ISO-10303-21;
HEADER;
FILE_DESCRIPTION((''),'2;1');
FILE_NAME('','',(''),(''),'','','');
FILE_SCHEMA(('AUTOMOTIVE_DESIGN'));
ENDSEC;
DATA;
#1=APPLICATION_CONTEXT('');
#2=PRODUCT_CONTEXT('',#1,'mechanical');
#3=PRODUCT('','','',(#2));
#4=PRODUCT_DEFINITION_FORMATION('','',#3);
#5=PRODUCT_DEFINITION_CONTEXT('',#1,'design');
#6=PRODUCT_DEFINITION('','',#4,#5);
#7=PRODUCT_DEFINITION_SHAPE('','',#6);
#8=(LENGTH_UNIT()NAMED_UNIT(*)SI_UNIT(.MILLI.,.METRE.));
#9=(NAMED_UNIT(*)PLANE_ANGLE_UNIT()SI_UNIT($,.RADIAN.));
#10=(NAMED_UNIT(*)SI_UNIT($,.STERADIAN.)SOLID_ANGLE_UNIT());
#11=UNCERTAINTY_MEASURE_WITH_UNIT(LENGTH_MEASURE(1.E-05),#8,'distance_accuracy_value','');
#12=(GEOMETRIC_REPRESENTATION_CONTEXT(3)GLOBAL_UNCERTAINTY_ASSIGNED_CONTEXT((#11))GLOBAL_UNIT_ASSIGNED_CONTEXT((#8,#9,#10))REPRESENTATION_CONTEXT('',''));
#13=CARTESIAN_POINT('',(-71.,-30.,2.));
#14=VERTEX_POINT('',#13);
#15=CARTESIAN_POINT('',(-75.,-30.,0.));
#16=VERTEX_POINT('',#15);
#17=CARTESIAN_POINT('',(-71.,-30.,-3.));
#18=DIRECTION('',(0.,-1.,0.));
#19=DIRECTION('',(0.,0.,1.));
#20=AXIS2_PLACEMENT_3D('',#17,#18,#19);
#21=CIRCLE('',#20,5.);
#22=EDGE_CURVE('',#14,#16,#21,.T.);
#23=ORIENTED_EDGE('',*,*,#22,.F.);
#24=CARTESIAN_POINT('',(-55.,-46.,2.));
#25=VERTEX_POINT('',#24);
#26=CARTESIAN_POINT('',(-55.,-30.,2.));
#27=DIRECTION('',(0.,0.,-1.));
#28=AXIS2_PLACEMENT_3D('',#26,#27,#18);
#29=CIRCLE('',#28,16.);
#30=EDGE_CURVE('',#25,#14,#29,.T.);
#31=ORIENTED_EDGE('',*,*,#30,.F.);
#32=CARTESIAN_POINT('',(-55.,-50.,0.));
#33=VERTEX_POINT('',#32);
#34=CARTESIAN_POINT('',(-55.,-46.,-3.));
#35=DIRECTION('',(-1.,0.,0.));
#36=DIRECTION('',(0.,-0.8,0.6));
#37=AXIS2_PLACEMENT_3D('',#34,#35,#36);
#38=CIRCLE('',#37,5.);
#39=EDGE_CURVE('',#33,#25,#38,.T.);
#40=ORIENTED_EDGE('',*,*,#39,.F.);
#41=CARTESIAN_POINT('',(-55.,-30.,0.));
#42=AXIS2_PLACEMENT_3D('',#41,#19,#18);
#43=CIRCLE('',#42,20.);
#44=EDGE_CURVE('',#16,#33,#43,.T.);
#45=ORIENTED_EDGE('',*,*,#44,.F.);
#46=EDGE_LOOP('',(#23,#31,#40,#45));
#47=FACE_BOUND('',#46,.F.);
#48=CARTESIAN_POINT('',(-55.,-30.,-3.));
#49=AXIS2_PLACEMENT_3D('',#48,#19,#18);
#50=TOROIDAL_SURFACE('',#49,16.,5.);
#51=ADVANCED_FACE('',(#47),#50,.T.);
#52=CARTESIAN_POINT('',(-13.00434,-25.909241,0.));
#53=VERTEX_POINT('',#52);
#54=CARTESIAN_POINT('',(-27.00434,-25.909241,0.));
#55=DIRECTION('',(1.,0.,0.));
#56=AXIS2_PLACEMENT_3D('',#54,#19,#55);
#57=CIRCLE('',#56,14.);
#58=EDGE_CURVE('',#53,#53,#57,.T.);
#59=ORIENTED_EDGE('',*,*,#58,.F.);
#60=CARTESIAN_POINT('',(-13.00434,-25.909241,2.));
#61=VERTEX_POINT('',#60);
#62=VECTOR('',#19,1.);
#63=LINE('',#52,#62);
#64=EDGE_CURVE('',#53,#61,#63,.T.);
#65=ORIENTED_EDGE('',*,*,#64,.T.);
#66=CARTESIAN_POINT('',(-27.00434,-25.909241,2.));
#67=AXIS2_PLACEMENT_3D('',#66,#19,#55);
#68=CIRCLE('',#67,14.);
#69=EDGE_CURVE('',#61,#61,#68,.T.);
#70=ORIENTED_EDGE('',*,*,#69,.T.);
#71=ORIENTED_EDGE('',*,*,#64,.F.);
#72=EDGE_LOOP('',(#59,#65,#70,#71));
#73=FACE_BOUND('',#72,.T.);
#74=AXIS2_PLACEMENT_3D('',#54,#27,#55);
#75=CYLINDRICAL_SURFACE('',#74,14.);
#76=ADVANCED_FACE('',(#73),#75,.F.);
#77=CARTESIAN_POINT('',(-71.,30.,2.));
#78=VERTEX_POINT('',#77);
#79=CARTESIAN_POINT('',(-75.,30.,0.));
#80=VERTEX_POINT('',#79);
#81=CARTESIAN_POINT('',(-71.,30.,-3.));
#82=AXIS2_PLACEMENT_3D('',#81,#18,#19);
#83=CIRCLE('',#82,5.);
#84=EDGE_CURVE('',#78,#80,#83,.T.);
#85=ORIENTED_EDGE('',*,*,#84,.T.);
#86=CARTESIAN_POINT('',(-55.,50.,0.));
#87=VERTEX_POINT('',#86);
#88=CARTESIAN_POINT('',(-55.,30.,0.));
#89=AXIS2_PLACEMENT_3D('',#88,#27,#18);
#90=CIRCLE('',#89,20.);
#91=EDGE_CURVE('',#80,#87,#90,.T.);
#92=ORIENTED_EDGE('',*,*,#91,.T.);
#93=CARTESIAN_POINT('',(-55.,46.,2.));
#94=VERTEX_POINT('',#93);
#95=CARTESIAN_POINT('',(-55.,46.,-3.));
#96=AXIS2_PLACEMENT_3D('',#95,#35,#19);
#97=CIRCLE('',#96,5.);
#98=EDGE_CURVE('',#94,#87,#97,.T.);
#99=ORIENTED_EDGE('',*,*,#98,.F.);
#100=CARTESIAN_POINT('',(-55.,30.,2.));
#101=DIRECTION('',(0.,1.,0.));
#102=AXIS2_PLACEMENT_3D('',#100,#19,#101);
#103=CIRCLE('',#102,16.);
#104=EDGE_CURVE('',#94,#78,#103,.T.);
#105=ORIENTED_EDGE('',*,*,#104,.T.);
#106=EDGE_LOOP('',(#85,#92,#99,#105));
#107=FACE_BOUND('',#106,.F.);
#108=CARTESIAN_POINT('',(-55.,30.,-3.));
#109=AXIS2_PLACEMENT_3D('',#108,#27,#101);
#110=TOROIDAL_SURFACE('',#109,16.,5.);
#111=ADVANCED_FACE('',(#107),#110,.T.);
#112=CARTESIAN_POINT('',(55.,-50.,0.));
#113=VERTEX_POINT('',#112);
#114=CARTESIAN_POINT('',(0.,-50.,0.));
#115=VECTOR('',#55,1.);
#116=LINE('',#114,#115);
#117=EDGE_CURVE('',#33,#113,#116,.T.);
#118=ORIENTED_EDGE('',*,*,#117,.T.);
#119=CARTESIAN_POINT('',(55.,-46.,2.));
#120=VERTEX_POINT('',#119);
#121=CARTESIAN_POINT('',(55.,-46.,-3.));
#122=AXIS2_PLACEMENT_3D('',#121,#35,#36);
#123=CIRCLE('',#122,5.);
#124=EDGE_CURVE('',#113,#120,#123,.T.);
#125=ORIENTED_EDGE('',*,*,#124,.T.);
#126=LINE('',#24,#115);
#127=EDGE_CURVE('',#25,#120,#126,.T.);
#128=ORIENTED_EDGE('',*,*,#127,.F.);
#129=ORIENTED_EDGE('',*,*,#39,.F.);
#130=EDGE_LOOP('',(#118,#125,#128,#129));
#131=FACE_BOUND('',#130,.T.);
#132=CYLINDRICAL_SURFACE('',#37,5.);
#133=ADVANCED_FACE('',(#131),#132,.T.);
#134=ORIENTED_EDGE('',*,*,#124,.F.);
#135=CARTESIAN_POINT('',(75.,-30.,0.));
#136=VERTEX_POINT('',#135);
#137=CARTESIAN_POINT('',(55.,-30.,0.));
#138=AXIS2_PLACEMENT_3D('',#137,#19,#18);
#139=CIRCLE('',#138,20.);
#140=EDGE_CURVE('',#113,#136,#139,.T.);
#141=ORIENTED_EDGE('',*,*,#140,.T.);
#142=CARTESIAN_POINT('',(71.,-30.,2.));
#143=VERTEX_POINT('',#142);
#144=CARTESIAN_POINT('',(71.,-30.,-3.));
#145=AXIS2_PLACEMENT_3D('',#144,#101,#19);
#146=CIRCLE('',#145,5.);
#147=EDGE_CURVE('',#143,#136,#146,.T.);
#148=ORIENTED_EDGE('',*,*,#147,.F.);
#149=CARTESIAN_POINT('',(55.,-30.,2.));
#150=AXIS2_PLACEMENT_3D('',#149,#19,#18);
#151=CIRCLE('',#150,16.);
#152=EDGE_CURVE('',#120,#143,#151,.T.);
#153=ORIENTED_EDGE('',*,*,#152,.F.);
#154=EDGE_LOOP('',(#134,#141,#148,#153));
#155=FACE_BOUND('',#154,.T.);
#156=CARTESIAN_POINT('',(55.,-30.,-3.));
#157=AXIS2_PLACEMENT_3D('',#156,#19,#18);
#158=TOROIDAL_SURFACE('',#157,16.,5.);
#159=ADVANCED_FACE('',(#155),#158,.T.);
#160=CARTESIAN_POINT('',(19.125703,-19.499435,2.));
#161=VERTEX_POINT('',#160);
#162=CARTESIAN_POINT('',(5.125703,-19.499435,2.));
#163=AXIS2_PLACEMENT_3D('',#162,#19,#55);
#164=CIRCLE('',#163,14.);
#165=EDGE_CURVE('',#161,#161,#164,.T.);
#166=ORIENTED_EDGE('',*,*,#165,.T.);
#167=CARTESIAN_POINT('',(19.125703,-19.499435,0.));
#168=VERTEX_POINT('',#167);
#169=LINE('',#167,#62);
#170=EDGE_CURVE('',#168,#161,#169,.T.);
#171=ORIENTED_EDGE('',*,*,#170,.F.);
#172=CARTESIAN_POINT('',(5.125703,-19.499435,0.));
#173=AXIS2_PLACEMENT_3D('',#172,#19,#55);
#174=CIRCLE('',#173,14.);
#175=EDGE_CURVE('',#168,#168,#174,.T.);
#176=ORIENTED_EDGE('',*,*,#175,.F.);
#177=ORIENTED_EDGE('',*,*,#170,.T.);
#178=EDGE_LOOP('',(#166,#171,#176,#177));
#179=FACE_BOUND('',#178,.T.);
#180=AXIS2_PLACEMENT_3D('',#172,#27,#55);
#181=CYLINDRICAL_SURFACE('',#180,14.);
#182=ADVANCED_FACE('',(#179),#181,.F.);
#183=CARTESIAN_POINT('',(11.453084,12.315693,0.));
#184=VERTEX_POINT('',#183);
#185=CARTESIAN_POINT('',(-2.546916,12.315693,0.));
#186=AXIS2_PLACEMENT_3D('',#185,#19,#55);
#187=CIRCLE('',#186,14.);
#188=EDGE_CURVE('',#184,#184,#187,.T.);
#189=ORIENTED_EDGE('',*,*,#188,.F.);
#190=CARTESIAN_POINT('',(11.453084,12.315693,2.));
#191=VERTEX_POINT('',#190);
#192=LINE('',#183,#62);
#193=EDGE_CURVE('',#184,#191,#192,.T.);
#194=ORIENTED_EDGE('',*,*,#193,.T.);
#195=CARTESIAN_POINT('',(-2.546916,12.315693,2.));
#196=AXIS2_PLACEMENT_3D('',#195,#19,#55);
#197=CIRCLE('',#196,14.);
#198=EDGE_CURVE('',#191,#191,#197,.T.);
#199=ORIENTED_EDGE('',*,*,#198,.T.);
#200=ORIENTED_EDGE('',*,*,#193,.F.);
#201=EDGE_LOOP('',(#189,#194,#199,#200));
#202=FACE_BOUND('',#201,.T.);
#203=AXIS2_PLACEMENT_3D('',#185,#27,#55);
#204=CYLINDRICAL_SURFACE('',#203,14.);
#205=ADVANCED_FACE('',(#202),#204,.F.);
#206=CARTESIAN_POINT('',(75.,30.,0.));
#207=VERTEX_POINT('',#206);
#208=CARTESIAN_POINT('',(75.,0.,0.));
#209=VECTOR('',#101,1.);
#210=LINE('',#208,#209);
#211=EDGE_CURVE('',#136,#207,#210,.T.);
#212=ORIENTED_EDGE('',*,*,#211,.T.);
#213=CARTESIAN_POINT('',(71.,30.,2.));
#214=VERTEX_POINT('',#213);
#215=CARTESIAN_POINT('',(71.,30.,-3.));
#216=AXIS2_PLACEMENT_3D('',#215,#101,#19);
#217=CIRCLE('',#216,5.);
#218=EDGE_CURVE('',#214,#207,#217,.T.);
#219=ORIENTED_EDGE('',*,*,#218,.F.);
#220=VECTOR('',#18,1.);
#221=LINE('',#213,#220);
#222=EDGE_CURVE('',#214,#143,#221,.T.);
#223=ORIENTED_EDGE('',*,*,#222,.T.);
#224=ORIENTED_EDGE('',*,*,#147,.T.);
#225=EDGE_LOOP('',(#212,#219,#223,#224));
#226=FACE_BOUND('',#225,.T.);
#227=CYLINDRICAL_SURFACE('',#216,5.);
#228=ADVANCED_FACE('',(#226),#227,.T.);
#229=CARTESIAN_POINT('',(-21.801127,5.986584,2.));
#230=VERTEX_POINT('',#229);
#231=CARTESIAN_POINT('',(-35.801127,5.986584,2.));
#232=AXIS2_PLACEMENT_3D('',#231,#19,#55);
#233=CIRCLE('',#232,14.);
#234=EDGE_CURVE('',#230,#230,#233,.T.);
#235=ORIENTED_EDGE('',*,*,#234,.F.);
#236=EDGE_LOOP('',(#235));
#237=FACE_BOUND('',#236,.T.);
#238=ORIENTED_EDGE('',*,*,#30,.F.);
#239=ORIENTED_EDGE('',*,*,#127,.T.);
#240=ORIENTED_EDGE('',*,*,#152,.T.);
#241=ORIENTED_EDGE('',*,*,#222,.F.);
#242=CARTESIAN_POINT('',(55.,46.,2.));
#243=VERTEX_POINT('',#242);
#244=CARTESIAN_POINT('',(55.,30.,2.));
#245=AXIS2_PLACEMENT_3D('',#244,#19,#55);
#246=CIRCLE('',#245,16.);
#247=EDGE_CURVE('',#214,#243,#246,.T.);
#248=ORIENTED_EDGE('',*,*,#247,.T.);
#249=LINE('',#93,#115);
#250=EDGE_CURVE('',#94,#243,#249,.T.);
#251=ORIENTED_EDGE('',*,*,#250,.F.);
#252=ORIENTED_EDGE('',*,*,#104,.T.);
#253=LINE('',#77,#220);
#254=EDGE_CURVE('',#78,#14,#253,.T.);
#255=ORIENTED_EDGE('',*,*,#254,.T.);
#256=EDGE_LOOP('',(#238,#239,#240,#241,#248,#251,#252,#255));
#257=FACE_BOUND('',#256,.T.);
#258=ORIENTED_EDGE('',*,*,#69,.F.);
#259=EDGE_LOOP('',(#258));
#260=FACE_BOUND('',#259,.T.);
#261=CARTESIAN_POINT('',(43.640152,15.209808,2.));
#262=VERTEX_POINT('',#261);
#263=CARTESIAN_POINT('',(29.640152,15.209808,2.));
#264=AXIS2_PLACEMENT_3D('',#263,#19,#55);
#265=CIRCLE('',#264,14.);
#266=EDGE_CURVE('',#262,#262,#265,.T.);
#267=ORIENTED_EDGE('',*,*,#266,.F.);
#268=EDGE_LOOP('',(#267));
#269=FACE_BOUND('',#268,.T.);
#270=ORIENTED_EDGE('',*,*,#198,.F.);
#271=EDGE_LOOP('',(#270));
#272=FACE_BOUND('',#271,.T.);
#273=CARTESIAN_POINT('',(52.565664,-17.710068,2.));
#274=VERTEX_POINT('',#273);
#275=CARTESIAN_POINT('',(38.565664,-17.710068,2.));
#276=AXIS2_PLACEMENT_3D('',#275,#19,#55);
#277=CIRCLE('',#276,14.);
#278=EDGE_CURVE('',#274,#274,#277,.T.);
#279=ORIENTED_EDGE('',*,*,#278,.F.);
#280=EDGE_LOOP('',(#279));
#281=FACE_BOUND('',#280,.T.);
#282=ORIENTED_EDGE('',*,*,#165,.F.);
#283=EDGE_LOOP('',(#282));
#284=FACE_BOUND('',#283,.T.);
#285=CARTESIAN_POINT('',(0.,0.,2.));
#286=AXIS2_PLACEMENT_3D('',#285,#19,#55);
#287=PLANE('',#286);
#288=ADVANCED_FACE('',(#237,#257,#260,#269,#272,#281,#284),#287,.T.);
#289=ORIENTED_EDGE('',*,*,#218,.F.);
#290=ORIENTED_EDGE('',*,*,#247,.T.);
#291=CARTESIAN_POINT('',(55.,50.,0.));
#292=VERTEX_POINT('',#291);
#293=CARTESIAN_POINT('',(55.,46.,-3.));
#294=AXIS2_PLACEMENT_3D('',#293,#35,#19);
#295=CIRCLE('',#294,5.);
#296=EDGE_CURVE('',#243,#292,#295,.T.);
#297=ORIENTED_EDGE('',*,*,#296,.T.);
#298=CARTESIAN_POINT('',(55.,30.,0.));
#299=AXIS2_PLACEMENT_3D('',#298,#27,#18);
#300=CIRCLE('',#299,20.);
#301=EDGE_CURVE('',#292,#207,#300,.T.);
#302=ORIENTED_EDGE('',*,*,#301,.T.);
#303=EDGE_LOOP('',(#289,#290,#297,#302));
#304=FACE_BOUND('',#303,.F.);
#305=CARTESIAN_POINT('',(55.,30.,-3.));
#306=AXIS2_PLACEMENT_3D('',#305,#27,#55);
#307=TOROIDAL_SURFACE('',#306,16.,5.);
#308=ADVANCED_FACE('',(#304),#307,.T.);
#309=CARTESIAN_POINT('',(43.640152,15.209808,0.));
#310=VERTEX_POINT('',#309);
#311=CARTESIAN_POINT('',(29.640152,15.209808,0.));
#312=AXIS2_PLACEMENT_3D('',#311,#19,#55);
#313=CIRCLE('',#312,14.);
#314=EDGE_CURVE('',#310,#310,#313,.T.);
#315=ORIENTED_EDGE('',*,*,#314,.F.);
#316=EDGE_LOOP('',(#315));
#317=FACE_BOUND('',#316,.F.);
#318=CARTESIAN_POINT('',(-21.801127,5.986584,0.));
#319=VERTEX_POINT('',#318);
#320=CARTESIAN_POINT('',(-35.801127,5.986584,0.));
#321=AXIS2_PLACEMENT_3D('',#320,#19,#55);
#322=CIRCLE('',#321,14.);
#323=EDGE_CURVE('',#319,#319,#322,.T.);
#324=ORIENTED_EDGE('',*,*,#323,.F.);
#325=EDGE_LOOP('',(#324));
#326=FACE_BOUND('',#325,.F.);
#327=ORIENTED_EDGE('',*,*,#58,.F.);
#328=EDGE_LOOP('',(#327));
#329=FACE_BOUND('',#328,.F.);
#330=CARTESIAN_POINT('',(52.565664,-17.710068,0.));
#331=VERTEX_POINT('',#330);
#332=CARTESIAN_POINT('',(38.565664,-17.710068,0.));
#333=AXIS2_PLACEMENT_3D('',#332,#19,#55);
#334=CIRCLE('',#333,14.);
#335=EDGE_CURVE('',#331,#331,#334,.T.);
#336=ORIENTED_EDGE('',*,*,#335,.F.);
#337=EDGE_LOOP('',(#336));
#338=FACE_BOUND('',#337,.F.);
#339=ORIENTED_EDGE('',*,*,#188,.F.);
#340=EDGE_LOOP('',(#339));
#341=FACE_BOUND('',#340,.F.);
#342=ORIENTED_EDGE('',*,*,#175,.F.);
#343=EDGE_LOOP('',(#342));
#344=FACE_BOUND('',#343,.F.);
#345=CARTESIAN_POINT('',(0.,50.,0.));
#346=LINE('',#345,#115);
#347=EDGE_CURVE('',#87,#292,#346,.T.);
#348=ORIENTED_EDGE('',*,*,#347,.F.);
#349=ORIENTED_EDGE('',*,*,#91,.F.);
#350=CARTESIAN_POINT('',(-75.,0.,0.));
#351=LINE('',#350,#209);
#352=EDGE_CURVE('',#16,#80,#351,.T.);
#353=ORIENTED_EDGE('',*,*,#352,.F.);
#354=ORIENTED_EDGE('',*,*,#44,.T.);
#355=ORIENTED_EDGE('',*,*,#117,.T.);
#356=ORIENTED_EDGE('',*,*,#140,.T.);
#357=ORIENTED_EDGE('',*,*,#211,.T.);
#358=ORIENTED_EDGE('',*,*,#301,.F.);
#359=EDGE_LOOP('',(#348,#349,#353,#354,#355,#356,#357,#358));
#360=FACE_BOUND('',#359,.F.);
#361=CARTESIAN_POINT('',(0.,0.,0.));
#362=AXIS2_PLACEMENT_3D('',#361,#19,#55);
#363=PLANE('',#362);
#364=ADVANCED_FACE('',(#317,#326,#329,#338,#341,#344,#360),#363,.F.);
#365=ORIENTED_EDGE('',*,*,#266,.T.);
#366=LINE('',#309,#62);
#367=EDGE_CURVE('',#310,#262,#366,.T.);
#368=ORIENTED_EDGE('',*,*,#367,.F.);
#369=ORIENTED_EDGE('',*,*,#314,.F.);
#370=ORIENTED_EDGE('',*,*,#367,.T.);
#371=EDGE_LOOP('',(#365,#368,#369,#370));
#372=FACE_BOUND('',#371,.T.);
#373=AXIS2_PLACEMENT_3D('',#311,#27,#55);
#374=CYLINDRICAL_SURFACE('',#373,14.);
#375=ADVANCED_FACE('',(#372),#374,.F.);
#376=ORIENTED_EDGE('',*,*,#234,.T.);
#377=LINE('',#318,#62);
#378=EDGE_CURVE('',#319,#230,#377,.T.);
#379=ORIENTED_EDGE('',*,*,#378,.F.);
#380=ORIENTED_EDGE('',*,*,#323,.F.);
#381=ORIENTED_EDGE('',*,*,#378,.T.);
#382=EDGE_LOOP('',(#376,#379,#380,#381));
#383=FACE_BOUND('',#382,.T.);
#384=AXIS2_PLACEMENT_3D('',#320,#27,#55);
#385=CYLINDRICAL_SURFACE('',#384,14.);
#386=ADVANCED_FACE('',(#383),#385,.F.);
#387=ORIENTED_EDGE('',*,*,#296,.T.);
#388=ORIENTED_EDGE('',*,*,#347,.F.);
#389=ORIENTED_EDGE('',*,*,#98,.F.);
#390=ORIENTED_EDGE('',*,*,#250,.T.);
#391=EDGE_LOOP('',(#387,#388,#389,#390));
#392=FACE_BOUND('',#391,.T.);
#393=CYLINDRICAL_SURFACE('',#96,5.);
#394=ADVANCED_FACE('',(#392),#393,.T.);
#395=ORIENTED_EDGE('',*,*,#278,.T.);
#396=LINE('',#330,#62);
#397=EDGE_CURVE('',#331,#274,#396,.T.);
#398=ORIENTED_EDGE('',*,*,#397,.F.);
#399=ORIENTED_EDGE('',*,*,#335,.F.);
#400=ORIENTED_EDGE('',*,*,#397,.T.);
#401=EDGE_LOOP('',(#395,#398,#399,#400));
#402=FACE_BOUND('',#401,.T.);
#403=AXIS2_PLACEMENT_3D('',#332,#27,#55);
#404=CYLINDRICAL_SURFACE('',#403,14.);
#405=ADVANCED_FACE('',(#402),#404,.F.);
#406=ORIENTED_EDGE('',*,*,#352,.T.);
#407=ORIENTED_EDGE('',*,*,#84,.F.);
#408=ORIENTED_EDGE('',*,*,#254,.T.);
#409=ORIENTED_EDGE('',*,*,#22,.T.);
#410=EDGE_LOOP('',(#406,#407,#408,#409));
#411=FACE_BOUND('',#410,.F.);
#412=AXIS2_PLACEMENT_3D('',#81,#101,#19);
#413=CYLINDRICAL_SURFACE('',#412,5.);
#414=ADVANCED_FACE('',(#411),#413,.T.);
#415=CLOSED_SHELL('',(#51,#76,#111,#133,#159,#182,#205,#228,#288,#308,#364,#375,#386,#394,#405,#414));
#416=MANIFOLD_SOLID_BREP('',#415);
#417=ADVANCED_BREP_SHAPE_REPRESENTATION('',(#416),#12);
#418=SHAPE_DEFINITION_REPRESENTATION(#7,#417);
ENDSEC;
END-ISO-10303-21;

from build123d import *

# Parameters (mm, degrees)
F0_W         = 150
F0_H         = 100
F0_R         = 14
F1_DEPTH     = 2
F2_R         = 20
F3_T1_DEPTH  = 110
F3_T3_DEPTH  = 60
F3_T6_ANGLE  = 90
F3_T8_ANGLE  = 90
F3_T10_ANGLE = 90
F3_T12_ANGLE = 90


# Not quite as in the source:
# - a fillet or chamfer that OpenCascade refuses, or shapes differently, is made with other operations: its cross-section is extruded or revolved along the edge and cut away or added


with BuildPart() as f1:
    # F0 (on Top) → F1 (new body)
    with BuildSketch(Plane.XY):
        Rectangle(F0_W, F0_H)
        with Locations((-27.0043395302, -25.9092412172)):
            Circle(F0_R, mode=Mode.SUBTRACT)
        with Locations((5.1257033043, -19.4994347856)):
            Circle(F0_R, mode=Mode.SUBTRACT)
        with Locations((38.5656639238, -17.7100679294)):
            Circle(F0_R, mode=Mode.SUBTRACT)
        with Locations((-35.8011273407, 5.9865840333)):
            Circle(F0_R, mode=Mode.SUBTRACT)
        with Locations((-2.5469161856, 12.3156928879)):
            Circle(F0_R, mode=Mode.SUBTRACT)
        with Locations((29.6401518762, 15.2098077585)):
            Circle(F0_R, mode=Mode.SUBTRACT)
    extrude(amount=F1_DEPTH)

    # F2
    f2_edges = [f1.edges().sort_by_distance(p)[0] for p in [
        (-75, -50, 1),
        (75, -50, 1),
        (-75, 50, 1),
        (75, 50, 1),
    ]]
    fillet(f2_edges, radius=F2_R)

    # F3: fillet of radius 5 on 2 edges, made by hand

    # F3_s2 → F3_t1 (cut)
    with BuildSketch(Plane.YZ.offset(-55)):
        with BuildLine():
            ThreePointArc((-50, 0), (-48.2360679775, 1.472135955), (-46, 2))
            Line((-46, 2), (-50, 2))
            Line((-50, 2), (-50, 0))
        make_face()
        with BuildLine():
            ThreePointArc((46, 2), (48.2360679775, 1.472135955), (50, 0))
            Line((50, 0), (50, 2))
            Line((50, 2), (46, 2))
        make_face()
    extrude(amount=F3_T1_DEPTH, mode=Mode.SUBTRACT)

    # F3_s4 → F3_t3 (cut)
    with BuildSketch(Plane.XZ.offset(-30)):
        with BuildLine():
            ThreePointArc((-71, 2), (-73.2360679775, 1.472135955), (-75, 0))
            Line((-75, 0), (-75, 2))
            Line((-75, 2), (-71, 2))
        make_face()
        with BuildLine():
            ThreePointArc((71, 2), (73.2360679775, 1.472135955), (75, 0))
            Line((75, 0), (75, 2))
            Line((75, 2), (71, 2))
        make_face()
    extrude(amount=F3_T3_DEPTH, mode=Mode.SUBTRACT)

    # F3_s5 → F3_t6 (revolve, cut)
    with BuildSketch(Plane.YZ.offset(-55)):
        with BuildLine():
            ThreePointArc((-50, 0), (-48.2360679775, 1.472135955), (-46, 2))
            Line((-46, 2), (-50, 2))
            Line((-50, 2), (-50, 0))
        make_face()
    revolve(axis=Axis((-55, -30, 2), (0, 0, -1)), revolution_arc=F3_T6_ANGLE, mode=Mode.SUBTRACT)

    # F3_s7 → F3_t8 (revolve, cut)
    with BuildSketch(Plane.YZ.offset(-55)):
        with BuildLine():
            ThreePointArc((46, 2), (48.2360679775, 1.472135955), (50, 0))
            Line((50, 0), (50, 2))
            Line((50, 2), (46, 2))
        make_face()
    revolve(axis=Axis((-55, 30, 2), (0, 0, 1)), revolution_arc=F3_T8_ANGLE, mode=Mode.SUBTRACT)

    # F3_s9 → F3_t10 (revolve, cut)
    with BuildSketch(Plane.XZ.offset(-30)):
        with BuildLine():
            ThreePointArc((71, 2), (73.2360679775, 1.472135955), (75, 0))
            Line((75, 0), (75, 2))
            Line((75, 2), (71, 2))
        make_face()
    revolve(axis=Axis((55, 30, 2), (0, 0, 1)), revolution_arc=F3_T10_ANGLE, mode=Mode.SUBTRACT)

    # F3_s11 → F3_t12 (revolve, cut)
    with BuildSketch(Plane.YZ.offset(55)):
        with BuildLine():
            ThreePointArc((-50, 0), (-48.2360679775, 1.472135955), (-46, 2))
            Line((-46, 2), (-50, 2))
            Line((-50, 2), (-50, 0))
        make_face()
    revolve(axis=Axis((55, -30, 2), (0, 0, 1)), revolution_arc=F3_T12_ANGLE, mode=Mode.SUBTRACT)


solid = f1.part
